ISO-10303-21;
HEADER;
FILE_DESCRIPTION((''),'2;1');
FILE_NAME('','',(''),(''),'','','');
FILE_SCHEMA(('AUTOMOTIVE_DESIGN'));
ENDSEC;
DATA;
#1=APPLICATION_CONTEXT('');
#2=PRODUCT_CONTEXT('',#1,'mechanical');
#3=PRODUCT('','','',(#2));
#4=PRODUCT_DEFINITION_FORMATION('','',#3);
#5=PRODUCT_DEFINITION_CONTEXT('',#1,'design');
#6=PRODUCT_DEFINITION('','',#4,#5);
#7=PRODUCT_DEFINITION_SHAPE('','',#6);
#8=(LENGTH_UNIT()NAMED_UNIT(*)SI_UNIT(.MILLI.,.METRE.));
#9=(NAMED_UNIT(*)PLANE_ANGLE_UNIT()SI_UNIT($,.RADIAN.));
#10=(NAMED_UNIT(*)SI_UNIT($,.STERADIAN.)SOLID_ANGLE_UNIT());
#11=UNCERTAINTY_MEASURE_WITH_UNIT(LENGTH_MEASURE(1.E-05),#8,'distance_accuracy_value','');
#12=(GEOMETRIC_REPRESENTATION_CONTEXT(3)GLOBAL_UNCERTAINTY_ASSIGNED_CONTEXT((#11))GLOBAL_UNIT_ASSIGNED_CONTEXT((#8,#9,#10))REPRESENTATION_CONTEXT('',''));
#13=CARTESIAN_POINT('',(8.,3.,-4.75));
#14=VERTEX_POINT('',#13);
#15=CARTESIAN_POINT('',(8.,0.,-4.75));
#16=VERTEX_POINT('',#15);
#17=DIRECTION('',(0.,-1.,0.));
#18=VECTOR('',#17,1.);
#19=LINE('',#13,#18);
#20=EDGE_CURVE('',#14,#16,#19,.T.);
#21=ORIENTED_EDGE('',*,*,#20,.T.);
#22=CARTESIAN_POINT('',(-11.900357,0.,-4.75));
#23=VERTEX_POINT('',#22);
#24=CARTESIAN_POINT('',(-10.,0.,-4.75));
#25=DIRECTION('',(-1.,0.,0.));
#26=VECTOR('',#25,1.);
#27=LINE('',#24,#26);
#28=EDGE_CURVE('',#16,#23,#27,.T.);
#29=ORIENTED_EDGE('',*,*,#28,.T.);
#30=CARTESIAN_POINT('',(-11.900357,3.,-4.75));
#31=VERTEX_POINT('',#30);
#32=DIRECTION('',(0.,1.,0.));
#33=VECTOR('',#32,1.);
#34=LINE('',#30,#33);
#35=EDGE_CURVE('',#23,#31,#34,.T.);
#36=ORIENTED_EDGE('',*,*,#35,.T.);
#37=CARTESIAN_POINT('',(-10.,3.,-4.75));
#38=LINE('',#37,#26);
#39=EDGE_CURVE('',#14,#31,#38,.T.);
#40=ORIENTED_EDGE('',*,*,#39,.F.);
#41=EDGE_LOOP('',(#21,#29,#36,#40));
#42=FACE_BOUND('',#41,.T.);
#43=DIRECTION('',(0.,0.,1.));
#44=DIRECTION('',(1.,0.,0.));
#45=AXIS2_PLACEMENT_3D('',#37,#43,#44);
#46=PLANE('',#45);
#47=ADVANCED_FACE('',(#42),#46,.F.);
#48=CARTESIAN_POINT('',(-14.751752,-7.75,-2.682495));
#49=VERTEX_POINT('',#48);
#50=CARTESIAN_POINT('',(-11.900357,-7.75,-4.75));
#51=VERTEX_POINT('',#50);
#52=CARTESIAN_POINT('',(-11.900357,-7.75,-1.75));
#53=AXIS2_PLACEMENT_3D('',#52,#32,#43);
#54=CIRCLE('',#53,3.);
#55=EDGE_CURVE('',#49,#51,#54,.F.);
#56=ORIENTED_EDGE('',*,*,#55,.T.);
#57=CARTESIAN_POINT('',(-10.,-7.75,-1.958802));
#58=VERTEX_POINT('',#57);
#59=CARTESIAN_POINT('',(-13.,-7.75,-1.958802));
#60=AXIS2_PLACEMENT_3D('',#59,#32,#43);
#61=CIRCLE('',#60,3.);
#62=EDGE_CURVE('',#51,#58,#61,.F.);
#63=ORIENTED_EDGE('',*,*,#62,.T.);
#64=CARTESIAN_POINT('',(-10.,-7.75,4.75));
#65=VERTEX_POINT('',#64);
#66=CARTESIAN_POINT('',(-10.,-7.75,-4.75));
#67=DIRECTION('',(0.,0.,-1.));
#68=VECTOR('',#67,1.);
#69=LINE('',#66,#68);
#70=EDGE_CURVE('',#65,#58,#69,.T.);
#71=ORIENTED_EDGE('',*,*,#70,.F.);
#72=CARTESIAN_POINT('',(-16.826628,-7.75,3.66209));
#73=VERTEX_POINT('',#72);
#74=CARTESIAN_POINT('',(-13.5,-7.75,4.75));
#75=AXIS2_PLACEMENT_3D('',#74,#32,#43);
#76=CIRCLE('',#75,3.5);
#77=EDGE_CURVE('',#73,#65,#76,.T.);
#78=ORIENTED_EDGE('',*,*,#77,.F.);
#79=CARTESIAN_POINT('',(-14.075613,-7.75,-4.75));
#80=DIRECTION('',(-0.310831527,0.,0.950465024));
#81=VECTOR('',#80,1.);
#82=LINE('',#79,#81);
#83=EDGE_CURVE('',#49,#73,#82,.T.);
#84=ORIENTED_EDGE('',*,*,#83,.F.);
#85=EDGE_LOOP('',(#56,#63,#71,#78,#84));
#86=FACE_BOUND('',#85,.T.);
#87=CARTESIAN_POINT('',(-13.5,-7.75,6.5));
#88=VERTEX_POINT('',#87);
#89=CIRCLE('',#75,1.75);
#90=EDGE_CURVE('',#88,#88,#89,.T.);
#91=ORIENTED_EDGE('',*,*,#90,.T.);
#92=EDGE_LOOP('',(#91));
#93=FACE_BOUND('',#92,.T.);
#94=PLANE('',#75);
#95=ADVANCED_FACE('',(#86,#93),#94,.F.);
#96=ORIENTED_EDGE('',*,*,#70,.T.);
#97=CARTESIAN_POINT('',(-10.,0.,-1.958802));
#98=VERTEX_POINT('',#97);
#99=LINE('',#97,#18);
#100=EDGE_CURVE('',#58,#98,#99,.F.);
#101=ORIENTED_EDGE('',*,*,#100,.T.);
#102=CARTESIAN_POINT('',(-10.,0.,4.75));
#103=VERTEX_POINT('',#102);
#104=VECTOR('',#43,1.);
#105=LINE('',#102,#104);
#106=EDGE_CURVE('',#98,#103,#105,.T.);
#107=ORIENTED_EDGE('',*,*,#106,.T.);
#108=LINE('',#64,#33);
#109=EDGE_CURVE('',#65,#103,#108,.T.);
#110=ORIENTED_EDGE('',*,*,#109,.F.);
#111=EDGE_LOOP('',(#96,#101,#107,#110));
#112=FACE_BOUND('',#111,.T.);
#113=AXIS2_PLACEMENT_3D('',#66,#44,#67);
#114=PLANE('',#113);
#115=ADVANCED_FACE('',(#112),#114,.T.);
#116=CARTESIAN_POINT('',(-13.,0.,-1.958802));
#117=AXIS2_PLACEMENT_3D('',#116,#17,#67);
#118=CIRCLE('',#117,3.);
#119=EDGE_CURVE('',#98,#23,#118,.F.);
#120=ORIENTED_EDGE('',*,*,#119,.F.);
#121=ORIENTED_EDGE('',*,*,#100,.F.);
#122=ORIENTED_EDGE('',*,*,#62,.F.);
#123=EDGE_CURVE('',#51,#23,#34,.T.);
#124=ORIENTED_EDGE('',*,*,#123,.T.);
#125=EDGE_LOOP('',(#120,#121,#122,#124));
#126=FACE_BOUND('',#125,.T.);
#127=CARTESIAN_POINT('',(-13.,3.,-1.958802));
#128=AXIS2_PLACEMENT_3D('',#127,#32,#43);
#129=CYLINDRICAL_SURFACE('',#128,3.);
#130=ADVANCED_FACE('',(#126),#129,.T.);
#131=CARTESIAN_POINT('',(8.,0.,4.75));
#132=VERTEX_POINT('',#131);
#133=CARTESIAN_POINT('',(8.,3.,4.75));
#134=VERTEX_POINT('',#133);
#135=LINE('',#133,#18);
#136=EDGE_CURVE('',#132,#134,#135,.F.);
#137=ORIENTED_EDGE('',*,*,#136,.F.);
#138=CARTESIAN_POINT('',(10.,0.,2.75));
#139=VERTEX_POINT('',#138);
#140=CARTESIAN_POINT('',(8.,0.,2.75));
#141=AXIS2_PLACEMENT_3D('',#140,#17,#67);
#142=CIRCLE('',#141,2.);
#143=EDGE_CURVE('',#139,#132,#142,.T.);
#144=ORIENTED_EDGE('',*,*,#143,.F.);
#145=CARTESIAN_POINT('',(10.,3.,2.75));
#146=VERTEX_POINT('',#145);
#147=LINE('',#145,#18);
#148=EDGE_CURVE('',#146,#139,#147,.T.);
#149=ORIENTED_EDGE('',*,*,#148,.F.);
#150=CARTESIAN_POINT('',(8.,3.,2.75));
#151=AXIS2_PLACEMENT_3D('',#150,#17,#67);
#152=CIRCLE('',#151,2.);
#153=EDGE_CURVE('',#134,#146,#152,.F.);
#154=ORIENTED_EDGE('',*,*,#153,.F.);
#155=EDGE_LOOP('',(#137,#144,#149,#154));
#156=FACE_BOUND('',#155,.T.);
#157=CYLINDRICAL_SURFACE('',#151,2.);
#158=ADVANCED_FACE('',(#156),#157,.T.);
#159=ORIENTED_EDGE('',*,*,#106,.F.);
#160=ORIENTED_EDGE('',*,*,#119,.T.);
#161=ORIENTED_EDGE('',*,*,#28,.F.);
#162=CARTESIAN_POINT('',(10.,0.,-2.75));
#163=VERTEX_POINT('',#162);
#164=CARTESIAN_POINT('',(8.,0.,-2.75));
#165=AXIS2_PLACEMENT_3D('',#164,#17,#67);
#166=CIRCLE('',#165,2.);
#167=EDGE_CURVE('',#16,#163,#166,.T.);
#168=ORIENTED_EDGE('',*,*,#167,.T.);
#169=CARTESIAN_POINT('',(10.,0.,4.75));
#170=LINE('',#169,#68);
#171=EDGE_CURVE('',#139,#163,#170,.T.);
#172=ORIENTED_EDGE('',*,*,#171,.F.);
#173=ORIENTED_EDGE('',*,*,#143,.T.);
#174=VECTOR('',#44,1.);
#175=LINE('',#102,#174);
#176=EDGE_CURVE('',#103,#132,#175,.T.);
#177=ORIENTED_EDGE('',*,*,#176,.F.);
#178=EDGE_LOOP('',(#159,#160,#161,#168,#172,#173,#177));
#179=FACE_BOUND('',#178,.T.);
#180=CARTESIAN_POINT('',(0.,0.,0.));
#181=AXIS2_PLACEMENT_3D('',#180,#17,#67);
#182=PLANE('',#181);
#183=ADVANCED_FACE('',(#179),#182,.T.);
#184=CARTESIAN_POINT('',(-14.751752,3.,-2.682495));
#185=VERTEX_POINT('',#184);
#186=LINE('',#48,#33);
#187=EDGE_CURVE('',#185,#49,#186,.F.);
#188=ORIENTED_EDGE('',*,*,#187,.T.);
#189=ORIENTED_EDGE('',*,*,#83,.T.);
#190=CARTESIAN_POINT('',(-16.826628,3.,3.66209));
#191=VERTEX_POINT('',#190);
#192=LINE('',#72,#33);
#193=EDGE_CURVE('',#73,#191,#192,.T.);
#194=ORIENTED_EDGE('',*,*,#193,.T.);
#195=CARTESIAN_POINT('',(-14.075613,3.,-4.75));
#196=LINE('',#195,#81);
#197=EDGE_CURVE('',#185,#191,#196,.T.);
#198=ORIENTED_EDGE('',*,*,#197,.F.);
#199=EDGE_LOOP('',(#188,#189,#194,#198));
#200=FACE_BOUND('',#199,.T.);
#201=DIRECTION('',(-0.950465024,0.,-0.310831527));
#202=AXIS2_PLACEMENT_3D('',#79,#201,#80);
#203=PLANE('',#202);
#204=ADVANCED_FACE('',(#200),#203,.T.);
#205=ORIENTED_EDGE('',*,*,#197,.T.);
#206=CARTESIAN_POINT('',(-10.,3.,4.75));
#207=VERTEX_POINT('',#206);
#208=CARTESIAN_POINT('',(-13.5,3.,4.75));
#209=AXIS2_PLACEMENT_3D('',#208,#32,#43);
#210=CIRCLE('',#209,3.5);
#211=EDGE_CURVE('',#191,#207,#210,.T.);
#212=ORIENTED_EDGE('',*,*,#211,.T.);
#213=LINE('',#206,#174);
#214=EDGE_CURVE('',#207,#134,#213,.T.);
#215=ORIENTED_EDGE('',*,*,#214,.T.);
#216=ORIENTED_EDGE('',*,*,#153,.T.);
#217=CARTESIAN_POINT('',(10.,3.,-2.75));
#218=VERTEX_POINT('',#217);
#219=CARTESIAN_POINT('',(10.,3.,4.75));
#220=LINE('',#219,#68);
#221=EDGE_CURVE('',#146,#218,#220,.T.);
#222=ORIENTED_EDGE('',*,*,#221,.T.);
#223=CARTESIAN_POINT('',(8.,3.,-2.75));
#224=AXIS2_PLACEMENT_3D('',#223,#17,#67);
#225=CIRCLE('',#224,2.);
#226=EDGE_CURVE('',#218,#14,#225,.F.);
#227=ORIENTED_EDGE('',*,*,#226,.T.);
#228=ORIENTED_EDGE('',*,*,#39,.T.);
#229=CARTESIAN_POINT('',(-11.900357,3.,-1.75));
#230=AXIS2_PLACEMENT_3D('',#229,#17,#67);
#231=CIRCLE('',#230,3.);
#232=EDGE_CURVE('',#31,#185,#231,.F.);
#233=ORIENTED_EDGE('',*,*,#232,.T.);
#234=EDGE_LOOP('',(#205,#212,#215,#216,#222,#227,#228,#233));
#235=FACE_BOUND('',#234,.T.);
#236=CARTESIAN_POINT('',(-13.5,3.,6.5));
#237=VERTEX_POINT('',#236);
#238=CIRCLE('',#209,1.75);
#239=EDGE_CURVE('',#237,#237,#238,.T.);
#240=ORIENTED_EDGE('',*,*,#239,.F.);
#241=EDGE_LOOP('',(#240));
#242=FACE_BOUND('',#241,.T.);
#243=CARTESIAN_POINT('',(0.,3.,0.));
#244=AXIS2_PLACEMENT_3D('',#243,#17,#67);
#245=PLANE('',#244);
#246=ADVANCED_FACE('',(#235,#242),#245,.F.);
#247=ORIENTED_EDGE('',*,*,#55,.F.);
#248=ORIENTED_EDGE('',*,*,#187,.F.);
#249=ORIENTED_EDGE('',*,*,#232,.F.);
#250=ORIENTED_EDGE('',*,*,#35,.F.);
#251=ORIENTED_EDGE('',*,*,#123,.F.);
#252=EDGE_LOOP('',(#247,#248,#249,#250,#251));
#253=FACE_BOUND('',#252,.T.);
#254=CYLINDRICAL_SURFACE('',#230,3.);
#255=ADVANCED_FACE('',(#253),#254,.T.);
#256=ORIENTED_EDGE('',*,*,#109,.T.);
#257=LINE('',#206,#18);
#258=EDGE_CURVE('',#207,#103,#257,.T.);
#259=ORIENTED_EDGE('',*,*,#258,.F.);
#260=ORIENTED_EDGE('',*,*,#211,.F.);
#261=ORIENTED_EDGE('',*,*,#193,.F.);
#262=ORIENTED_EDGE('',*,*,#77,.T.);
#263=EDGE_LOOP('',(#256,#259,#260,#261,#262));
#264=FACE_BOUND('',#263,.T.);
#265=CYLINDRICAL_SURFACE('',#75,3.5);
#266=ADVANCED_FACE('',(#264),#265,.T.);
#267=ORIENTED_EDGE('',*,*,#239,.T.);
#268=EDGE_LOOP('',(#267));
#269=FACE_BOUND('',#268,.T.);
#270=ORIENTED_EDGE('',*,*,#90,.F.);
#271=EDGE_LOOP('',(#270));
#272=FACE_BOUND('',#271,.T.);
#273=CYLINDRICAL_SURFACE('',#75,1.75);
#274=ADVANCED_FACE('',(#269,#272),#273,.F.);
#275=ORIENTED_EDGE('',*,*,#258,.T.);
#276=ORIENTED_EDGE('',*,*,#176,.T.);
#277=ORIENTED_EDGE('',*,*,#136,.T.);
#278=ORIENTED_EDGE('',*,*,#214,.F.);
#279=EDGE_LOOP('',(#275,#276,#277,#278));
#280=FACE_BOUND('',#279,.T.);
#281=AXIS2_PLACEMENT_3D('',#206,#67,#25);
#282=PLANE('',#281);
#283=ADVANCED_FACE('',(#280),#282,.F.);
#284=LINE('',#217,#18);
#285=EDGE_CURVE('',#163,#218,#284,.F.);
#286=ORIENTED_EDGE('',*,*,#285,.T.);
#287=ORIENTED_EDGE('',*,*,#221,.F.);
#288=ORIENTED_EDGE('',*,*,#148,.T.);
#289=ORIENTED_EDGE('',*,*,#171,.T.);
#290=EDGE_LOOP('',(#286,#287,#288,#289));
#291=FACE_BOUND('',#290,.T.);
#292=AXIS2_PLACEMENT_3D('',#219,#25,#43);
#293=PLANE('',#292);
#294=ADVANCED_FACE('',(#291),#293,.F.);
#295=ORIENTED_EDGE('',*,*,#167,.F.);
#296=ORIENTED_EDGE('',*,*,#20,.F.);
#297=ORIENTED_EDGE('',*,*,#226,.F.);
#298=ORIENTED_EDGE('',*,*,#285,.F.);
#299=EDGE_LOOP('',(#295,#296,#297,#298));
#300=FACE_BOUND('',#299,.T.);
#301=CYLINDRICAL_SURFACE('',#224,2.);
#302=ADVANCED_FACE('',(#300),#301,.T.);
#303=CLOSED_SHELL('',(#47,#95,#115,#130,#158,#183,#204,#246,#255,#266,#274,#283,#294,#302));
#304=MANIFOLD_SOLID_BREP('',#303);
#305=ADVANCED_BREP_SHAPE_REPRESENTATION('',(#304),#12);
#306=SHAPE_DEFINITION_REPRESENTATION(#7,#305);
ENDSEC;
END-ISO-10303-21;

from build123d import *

# Parameters (mm, degrees)
SKETCH1_W           = 20
SKETCH1_H           = 9.5
BOSS_EXTRUDE1_DEPTH = 3
SKETCH2_R           = 1.75
BOSS_EXTRUDE2_DEPTH = 10.75
FILLET1_R           = 3
FILLET2_R           = 3
FILLET3_R           = 2


with BuildPart() as part:
    # Sketch1 → Boss-Extrude1 (new body)
    with BuildSketch(Plane(origin=(0, 0, 0), x_dir=(1, 0, 0), z_dir=(0, 1, 0))):
        Rectangle(SKETCH1_W, SKETCH1_H)
    extrude(amount=BOSS_EXTRUDE1_DEPTH)

    # Sketch2 → Boss-Extrude2 (add)
    with BuildSketch(Plane(origin=(0, 3, 0), x_dir=(1, 0, 0), z_dir=(0, 1, 0))):
        with BuildLine():
            Line((-14.075613498, 4.75), (-16.826627584, -3.662089657))
            ThreePointArc((-16.826627584, -3.662089657), (-14.050819142, -8.206385145), (-10, -4.75))
            Line((-10, -4.75), (-10, 4.75))
            Line((-10, 4.75), (-14.075613498, 4.75))
        make_face()
        with Locations(Location((-13.5, -4.75, 0), (0, 0, 270))):
            Circle(SKETCH2_R, mode=Mode.SUBTRACT)
    extrude(amount=-BOSS_EXTRUDE2_DEPTH)

    # Fillet1
    fillet1_edges = [part.edges().sort_by_distance(p)[0] for p in [
        (-14.075613498, -2.375, -4.75),
    ]]
    fillet(fillet1_edges, radius=FILLET1_R)

    # Fillet2
    # the kernel refuses this fillet: 3 mm, written as the material it takes off along each edge
    with BuildSketch(Plane(origin=(-10, 0, -4.75), x_dir=(-1, 0, 0), z_dir=(0, -1, 0))) as fillet2_piece_1:
        with BuildLine():
            CenterArc((3, -2.791197737), FILLET2_R, 111.502864163, 68.497135837)
            Line((0, -2.791197737), (0, 0))
            Line((0, 0), (1.900356789, 0))
        make_face()
    extrude(amount=14.727994343, mode=Mode.SUBTRACT)

    # Fillet3
    fillet3_edges = [part.edges().sort_by_distance(p)[0] for p in [
        (10, 1.5, 4.75),
        (10, 1.5, -4.75),
    ]]
    fillet(fillet3_edges, radius=FILLET3_R)


solid = part.part
